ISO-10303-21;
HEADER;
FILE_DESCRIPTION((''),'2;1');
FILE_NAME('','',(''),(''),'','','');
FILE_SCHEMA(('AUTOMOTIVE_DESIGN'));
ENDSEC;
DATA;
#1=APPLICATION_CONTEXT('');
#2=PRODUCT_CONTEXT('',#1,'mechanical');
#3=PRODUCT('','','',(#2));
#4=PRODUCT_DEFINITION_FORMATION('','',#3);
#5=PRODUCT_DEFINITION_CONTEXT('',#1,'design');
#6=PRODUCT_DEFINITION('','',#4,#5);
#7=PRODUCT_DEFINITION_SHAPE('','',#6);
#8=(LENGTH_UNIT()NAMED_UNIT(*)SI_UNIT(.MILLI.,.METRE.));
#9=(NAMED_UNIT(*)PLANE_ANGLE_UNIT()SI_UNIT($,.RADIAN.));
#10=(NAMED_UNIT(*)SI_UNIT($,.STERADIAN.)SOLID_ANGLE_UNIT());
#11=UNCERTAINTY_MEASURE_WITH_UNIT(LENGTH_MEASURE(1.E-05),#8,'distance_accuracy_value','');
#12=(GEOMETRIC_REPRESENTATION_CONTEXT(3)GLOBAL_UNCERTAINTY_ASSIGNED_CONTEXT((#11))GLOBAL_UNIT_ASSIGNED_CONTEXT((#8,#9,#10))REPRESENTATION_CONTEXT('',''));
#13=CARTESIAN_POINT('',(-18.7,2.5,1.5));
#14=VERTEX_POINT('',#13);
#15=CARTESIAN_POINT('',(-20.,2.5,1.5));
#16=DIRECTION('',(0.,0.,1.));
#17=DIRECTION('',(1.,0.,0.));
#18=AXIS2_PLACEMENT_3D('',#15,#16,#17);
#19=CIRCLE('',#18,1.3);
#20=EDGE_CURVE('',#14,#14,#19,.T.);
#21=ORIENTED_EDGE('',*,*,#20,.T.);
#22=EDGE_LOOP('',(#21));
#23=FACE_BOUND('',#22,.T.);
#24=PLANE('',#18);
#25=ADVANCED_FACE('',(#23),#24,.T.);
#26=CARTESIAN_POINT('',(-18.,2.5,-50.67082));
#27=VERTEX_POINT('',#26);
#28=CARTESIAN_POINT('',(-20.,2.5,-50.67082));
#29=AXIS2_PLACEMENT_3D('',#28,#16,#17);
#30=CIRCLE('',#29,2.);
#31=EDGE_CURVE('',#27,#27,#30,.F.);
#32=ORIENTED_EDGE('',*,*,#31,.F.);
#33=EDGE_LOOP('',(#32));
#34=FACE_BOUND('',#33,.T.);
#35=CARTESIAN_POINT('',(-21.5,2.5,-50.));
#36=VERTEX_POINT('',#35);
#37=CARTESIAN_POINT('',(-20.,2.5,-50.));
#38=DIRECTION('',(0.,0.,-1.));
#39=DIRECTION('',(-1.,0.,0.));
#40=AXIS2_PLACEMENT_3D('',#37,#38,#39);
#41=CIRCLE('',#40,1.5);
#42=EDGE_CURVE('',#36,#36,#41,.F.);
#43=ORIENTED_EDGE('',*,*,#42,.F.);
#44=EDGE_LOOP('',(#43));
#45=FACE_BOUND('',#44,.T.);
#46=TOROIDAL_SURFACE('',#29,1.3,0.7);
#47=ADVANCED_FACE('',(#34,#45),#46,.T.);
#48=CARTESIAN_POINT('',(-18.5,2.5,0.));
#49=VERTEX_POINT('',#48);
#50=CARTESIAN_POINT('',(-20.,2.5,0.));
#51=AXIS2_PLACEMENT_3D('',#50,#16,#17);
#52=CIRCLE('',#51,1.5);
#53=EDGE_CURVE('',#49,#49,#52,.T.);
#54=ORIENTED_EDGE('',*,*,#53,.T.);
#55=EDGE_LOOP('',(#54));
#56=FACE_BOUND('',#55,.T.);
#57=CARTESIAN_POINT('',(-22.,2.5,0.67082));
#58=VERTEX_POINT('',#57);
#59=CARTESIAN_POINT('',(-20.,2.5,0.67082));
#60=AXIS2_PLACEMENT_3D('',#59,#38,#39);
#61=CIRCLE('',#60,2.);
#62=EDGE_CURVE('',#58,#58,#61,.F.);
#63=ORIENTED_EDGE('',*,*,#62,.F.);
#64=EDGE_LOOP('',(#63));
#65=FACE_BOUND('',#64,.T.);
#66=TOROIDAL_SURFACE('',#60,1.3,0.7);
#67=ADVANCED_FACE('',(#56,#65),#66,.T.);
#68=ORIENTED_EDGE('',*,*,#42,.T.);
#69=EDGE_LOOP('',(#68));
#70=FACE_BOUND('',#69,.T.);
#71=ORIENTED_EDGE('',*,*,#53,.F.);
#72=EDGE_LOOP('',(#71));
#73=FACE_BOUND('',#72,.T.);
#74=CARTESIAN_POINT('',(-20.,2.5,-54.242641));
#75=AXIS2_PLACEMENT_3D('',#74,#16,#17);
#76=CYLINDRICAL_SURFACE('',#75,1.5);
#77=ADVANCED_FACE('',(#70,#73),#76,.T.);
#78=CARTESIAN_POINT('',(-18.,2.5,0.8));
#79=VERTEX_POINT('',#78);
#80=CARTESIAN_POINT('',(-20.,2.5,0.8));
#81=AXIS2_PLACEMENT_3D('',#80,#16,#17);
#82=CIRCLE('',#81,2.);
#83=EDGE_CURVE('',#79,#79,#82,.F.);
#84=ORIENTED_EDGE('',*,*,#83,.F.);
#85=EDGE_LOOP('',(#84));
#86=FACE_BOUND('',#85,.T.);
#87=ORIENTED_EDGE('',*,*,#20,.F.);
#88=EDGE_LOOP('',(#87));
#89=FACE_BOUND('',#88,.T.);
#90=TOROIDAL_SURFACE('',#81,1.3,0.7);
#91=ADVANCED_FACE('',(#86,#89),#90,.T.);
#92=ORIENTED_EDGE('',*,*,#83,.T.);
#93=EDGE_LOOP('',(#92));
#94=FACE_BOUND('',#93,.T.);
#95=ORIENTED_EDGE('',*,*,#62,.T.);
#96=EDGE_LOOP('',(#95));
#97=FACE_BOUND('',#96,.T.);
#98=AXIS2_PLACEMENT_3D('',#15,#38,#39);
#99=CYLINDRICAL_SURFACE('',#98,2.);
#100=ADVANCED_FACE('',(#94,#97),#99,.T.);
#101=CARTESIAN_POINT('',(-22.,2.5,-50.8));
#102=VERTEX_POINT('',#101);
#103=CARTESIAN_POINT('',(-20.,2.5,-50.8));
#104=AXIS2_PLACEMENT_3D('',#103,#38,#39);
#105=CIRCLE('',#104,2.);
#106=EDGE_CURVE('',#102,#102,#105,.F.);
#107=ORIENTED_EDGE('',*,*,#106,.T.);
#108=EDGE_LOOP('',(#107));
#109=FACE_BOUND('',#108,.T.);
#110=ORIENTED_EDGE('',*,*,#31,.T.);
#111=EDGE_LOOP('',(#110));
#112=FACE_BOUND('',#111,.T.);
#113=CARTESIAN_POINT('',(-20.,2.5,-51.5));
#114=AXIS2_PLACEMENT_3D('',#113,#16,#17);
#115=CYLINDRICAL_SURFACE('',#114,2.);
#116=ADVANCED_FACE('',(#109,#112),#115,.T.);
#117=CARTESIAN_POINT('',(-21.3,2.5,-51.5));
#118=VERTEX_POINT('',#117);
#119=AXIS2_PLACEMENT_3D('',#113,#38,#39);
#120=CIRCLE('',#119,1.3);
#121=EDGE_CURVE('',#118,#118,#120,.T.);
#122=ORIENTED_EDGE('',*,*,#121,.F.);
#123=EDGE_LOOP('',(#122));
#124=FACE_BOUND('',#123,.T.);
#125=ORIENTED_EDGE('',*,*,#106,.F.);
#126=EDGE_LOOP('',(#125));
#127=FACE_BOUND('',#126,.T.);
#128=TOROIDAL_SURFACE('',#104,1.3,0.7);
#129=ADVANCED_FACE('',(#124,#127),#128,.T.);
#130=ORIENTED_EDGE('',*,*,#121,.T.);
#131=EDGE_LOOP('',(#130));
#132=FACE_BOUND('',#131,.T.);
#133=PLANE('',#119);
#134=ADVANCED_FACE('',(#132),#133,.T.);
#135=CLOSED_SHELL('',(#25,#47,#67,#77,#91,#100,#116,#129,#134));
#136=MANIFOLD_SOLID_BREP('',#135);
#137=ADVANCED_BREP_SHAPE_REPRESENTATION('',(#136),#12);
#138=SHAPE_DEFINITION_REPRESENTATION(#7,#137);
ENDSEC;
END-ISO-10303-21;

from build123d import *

# Parameters (mm, degrees)
ESBO_O1_R                = 1.5
RESSALTO_EXTRUS_O1_DEPTH = 50
ESBO_O2_R                = 2
RESSALTO_EXTRUS_O2_DEPTH = 1.5
RESSALTO_EXTRUS_O3_START = -51.5
ESBO_O2_2_R              = 2
RESSALTO_EXTRUS_O3_DEPTH = 1.5
FILETE1_R                = 0.7


with BuildPart() as part:
    # Esboço1 → Ressalto-extrusão1 (new body)
    with BuildSketch(Plane.XY):
        with Locations((-20, 2.5)):
            Circle(ESBO_O1_R)
    extrude(amount=-RESSALTO_EXTRUS_O1_DEPTH)

    # Esboço2 → Ressalto-extrusão2 (add)
    with BuildSketch(Plane.XY):
        with Locations((-20, 2.5)):
            Circle(ESBO_O2_R)
    extrude(amount=RESSALTO_EXTRUS_O2_DEPTH)

    # Esboço2<2> → Ressalto-extrusão3 (add)
    with BuildSketch(Plane.XY.offset(RESSALTO_EXTRUS_O3_START)):
        with Locations((-20, 2.5)):
            Circle(ESBO_O2_2_R)
    extrude(amount=RESSALTO_EXTRUS_O3_DEPTH)

    # Filete1
    # the kernel refuses this fillet: 0.7 mm, written as the material it takes off along each edge
    with BuildSketch(Plane(origin=(-20, 2.5, 0), x_dir=(1, 0, 0), z_dir=(0, -1, 0))) as filete1_piece_1:
        with BuildLine():
            CenterArc((1.3, 0.670820393), FILETE1_R, 286.601549599, 73.398450401)
            Line((2, 0.670820393), (2.014, 0.670820393))
            Line((2.014, 0.670820393), (2.014, 0))
            Line((2.014, 0), (2, -0.014))
            ThreePointArc((2, -0.014), (1.75, -0.014), (1.504, -0.013416408))
            Line((1.504, -0.013416408), (1.5, 0))
        make_face()
    revolve(axis=Axis((-20, 2.5, 0), (0, 0, 1)), mode=Mode.SUBTRACT)
    with BuildSketch(Plane(origin=(-20, 2.5, 1.5), x_dir=(1, 0, 0), z_dir=(0, -1, 0))) as filete1_piece_2:
        with BuildLine():
            CenterArc((2 - FILETE1_R, -FILETE1_R), FILETE1_R, 0, 90)
            Line((2 - FILETE1_R, 0), (2 - FILETE1_R, FILETE1_R * 0.02))
            Line((2 - FILETE1_R, FILETE1_R * 0.02), (2 + FILETE1_R * 0.02, FILETE1_R * 0.02))
            Line((2 + FILETE1_R * 0.02, FILETE1_R * 0.02), (2 + FILETE1_R * 0.02, -FILETE1_R))
            Line((2 + FILETE1_R * 0.02, -FILETE1_R), (2, -FILETE1_R))
        make_face()
    revolve(axis=Axis((-20, 2.5, 1.5), (0, 0, 1)), mode=Mode.SUBTRACT)
    with BuildSketch(Plane(origin=(-20, 2.5, -50), x_dir=(1, 0, 0), z_dir=(0, -1, 0))) as filete1_piece_3:
        with BuildLine():
            CenterArc((1.3, -0.670820393), FILETE1_R, 0, 73.398450401)
            Line((1.5, 0), (1.504, 0.013416408))
            ThreePointArc((1.504, 0.013416408), (1.75, 0.014), (2, 0.014))
            Line((2, 0.014), (2.014, 0))
            Line((2.014, 0), (2.014, -0.670820393))
            Line((2.014, -0.670820393), (2, -0.670820393))
        make_face()
    revolve(axis=Axis((-20, 2.5, -50), (0, 0, 1)), mode=Mode.SUBTRACT)
    with BuildSketch(Plane(origin=(-20, 2.5, -51.5), x_dir=(1, 0, 0), z_dir=(0, -1, 0))) as filete1_piece_4:
        with BuildLine():
            CenterArc((2 - FILETE1_R, FILETE1_R), FILETE1_R, 270, 90)
            Line((2 - FILETE1_R, 0), (2 - FILETE1_R, -FILETE1_R * 0.02))
            Line((2 - FILETE1_R, -FILETE1_R * 0.02), (2 + FILETE1_R * 0.02, -FILETE1_R * 0.02))
            Line((2 + FILETE1_R * 0.02, -FILETE1_R * 0.02), (2 + FILETE1_R * 0.02, FILETE1_R))
            Line((2 + FILETE1_R * 0.02, FILETE1_R), (2, FILETE1_R))
        make_face()
    revolve(axis=Axis((-20, 2.5, -51.5), (0, 0, 1)), mode=Mode.SUBTRACT)


solid = part.part
